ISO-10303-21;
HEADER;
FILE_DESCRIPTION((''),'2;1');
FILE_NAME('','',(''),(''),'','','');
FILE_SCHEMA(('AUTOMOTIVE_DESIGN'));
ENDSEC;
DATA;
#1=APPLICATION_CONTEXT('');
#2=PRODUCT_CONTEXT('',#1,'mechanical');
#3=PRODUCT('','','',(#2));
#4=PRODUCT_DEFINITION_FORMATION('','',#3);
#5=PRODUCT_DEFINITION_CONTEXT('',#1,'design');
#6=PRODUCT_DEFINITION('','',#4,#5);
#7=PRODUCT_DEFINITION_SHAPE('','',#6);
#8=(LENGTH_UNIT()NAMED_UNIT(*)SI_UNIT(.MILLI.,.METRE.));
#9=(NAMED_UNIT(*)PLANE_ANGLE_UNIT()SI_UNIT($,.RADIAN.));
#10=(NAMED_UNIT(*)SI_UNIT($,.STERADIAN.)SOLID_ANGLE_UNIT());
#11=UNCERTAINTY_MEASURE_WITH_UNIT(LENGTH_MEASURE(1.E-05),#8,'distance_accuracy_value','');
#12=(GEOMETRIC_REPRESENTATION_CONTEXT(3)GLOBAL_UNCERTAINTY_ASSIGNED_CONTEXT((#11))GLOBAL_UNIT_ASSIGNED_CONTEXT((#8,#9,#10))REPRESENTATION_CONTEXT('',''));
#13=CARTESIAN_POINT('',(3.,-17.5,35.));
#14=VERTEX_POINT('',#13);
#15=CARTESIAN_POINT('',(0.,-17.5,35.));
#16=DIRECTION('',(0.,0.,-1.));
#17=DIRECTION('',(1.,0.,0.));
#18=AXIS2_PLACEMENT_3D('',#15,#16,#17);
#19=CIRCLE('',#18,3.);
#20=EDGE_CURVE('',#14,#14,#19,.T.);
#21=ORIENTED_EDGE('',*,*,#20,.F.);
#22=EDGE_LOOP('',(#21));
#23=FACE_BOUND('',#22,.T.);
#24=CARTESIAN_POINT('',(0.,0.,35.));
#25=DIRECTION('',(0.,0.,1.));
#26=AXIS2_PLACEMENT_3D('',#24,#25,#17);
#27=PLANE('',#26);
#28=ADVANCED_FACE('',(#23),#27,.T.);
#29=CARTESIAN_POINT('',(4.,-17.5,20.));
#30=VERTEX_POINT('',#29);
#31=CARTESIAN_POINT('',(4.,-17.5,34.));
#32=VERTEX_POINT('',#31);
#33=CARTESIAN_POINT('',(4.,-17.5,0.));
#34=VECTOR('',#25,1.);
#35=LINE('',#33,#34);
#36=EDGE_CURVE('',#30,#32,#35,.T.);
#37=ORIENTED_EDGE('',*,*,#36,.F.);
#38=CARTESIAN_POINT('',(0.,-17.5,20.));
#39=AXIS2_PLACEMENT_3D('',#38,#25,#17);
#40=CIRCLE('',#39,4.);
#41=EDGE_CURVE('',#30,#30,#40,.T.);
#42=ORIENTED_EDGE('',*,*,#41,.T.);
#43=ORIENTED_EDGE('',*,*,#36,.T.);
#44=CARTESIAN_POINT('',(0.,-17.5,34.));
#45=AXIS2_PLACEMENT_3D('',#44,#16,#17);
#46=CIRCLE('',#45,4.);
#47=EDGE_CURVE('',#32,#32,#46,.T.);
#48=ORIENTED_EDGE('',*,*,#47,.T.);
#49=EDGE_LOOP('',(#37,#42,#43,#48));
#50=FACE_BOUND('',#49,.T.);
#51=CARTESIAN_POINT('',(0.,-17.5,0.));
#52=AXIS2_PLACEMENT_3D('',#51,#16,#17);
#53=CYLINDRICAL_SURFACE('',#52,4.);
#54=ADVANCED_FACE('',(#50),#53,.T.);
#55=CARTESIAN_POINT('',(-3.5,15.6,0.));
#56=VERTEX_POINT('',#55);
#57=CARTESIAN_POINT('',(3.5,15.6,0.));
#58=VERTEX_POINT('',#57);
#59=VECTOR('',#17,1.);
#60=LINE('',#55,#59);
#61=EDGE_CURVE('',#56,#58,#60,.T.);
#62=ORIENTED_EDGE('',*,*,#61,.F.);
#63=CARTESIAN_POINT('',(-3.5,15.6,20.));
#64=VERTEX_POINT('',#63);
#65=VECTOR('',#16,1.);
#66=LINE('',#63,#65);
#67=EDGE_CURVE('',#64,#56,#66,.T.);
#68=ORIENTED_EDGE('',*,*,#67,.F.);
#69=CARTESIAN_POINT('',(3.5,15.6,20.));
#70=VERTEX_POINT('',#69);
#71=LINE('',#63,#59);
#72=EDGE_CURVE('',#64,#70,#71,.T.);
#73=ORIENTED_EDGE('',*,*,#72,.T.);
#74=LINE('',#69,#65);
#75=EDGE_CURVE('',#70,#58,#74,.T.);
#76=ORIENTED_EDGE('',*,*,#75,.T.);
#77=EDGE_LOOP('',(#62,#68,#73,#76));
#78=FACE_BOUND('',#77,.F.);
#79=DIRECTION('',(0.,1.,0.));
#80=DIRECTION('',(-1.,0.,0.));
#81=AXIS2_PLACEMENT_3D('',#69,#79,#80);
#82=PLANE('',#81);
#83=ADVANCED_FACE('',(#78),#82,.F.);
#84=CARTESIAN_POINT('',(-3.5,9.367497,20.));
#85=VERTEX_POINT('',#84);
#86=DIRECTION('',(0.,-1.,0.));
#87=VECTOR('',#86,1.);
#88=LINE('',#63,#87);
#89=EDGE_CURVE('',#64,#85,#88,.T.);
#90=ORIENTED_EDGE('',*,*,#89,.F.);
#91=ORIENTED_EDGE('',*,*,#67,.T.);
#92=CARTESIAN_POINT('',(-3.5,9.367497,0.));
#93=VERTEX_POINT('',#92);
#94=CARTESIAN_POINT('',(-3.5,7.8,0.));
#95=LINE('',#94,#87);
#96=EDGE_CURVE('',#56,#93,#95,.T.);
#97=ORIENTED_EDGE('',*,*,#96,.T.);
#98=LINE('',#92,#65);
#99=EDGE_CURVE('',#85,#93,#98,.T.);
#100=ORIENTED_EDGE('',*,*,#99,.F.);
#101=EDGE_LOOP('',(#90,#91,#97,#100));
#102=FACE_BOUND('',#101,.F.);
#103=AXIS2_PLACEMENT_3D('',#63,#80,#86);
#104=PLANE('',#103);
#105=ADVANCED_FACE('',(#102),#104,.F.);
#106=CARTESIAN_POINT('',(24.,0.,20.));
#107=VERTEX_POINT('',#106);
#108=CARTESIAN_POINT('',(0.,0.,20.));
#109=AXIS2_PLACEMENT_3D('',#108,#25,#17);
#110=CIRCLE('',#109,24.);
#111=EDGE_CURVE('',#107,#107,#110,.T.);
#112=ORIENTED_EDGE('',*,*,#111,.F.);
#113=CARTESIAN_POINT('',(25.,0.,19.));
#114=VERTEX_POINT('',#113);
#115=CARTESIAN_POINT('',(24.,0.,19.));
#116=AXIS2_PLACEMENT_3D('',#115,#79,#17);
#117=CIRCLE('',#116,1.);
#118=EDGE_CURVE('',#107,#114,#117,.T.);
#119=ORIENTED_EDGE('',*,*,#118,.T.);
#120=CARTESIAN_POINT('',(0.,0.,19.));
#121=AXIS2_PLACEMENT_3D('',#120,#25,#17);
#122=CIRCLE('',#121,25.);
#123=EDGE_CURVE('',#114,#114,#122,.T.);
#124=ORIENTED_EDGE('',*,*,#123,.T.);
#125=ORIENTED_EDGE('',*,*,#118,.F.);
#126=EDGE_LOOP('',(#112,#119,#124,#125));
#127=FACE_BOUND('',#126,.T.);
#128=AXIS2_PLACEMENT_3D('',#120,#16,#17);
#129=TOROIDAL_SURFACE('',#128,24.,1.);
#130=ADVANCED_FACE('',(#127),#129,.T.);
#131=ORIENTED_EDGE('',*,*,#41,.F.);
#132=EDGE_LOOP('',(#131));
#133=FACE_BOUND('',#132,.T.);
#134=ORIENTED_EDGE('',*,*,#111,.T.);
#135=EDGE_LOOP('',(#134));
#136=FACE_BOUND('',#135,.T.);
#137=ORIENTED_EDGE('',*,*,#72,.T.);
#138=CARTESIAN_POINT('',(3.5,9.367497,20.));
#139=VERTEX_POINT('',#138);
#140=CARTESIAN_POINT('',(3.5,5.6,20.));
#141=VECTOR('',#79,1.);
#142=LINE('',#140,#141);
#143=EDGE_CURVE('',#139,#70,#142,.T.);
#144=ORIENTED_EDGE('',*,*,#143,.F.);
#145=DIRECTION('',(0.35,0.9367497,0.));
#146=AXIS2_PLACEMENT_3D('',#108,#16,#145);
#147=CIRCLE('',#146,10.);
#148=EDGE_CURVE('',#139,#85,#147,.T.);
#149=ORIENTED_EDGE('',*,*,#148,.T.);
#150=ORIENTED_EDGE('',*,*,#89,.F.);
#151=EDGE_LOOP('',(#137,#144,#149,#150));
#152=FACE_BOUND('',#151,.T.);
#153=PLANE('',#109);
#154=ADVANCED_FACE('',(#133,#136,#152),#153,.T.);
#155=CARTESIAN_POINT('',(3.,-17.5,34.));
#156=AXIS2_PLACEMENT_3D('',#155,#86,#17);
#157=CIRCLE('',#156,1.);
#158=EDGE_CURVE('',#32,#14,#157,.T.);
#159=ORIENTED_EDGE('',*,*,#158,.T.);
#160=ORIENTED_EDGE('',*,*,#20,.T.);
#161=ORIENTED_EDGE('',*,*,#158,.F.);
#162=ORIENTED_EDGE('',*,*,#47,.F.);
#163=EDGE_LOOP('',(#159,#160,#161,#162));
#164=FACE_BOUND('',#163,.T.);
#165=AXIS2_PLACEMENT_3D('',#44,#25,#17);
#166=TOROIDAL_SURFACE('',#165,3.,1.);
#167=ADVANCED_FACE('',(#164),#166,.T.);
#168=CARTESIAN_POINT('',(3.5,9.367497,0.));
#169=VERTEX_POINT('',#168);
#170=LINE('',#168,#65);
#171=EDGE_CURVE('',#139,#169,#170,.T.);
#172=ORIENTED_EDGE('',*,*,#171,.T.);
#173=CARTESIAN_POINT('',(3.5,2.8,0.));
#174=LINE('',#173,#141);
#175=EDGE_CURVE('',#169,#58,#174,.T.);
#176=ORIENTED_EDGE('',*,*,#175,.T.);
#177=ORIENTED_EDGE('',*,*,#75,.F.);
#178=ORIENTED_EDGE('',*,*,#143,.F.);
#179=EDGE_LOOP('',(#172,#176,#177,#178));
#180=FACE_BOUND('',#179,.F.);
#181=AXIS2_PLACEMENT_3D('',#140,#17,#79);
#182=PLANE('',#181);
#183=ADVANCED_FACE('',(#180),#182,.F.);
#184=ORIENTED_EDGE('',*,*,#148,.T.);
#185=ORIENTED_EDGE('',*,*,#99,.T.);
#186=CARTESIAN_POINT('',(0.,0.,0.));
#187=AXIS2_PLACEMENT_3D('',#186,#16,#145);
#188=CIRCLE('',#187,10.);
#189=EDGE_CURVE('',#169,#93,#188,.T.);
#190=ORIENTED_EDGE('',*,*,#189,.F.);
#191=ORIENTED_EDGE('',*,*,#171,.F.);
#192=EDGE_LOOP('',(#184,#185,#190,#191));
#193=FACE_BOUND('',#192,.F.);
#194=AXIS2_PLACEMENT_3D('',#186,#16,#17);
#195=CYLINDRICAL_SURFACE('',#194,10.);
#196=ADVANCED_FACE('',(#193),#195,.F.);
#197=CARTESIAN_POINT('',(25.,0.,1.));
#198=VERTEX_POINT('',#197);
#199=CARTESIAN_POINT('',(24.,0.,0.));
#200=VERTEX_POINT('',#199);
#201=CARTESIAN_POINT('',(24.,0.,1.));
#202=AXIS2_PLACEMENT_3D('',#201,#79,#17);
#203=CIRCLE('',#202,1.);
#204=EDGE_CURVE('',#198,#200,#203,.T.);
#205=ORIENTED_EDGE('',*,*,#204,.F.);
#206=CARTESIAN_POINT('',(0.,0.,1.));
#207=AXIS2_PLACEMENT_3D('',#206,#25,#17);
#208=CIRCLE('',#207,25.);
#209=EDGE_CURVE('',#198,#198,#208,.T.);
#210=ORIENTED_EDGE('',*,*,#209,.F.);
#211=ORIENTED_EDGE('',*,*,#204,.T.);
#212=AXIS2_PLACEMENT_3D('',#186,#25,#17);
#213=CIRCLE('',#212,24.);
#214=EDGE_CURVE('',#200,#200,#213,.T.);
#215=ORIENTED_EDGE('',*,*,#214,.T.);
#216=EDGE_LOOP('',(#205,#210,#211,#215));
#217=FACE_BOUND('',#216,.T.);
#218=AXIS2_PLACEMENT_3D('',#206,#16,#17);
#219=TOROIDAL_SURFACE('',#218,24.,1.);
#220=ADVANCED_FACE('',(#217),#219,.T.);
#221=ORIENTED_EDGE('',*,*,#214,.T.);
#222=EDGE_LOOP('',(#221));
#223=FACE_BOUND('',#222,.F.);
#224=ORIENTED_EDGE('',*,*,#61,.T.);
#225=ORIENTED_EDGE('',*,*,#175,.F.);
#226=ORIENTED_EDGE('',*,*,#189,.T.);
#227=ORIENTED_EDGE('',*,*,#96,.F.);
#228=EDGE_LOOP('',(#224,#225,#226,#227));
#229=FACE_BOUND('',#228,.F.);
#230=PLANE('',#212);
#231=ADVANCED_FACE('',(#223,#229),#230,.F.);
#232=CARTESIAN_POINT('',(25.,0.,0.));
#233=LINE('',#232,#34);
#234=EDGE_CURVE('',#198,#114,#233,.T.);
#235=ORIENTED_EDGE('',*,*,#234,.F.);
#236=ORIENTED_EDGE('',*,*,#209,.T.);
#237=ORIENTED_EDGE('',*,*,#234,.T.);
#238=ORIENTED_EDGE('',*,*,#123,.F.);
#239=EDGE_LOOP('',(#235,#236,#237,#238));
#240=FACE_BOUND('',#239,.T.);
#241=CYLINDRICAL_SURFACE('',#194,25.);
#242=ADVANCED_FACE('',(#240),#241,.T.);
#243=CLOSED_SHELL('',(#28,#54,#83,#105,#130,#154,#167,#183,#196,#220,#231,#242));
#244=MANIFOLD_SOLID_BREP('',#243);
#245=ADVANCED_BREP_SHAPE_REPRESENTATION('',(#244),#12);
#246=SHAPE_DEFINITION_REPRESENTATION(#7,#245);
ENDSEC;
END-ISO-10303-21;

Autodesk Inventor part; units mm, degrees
ref_plane "YZ Plane" through (0, 0, 0) normal (1, 0, 0) x (0, 1, 0)
ref_plane "XZ Plane" through (0, 0, 0) normal (0, 1, 0) x (-1, 0, 0)
ref_plane "XY Plane" through (0, 0, 0) normal (0, 0, 1) x (1, 0, 0)
sketch "Boceto1" plane through (0, 0, 0) normal (0, 0, 1) x (1, 0, 0)
  circle A0 centre (0, 0) radius 25
  circle A1 centre (0, 0) radius 10
  line L0 (0, -25) -> (0, -17.5)
  circle A2 centre (0, -17.5) radius 4
  dimension "d0" = 50
  dimension "d1" = 20
  dimension "d3" = 7.5
  dimension "d4" = 8
extrude "Extrusión1" add sketch "Boceto1" along normal blind 35 contours A2
extrude "Extrusión2" add sketch "Boceto1" along normal blind 20
fillet "Empalme1" radius 1 3 edges at (-25, 0, 0) (-25, 0, 20) (-4, -17.5, 35)
sketch "Boceto3" plane through (0, 0, 20) normal (0, 0, 1) x (1, 0, 0)
  line L0 (0, 15.6) -> (-3.5, 15.6)
  line L1 (-3.5, 15.6) -> (-3.5, 5.6)
  line L2 (-3.5, 5.6) -> (3.5, 5.6)
  line L3 (3.5, 5.6) -> (3.5, 15.6)
  line L4 (3.5, 15.6) -> (0, 15.6)
  point P0 (0, 0)
  dimension "d18" = 15.6
  dimension "d19" = 3.5
  dimension "d20" = 10
  dimension "d21" = 7
extrude "Extrusión4" cut sketch "Boceto3" against normal through all
properties part number "PIEZA PARA GIRAR"
